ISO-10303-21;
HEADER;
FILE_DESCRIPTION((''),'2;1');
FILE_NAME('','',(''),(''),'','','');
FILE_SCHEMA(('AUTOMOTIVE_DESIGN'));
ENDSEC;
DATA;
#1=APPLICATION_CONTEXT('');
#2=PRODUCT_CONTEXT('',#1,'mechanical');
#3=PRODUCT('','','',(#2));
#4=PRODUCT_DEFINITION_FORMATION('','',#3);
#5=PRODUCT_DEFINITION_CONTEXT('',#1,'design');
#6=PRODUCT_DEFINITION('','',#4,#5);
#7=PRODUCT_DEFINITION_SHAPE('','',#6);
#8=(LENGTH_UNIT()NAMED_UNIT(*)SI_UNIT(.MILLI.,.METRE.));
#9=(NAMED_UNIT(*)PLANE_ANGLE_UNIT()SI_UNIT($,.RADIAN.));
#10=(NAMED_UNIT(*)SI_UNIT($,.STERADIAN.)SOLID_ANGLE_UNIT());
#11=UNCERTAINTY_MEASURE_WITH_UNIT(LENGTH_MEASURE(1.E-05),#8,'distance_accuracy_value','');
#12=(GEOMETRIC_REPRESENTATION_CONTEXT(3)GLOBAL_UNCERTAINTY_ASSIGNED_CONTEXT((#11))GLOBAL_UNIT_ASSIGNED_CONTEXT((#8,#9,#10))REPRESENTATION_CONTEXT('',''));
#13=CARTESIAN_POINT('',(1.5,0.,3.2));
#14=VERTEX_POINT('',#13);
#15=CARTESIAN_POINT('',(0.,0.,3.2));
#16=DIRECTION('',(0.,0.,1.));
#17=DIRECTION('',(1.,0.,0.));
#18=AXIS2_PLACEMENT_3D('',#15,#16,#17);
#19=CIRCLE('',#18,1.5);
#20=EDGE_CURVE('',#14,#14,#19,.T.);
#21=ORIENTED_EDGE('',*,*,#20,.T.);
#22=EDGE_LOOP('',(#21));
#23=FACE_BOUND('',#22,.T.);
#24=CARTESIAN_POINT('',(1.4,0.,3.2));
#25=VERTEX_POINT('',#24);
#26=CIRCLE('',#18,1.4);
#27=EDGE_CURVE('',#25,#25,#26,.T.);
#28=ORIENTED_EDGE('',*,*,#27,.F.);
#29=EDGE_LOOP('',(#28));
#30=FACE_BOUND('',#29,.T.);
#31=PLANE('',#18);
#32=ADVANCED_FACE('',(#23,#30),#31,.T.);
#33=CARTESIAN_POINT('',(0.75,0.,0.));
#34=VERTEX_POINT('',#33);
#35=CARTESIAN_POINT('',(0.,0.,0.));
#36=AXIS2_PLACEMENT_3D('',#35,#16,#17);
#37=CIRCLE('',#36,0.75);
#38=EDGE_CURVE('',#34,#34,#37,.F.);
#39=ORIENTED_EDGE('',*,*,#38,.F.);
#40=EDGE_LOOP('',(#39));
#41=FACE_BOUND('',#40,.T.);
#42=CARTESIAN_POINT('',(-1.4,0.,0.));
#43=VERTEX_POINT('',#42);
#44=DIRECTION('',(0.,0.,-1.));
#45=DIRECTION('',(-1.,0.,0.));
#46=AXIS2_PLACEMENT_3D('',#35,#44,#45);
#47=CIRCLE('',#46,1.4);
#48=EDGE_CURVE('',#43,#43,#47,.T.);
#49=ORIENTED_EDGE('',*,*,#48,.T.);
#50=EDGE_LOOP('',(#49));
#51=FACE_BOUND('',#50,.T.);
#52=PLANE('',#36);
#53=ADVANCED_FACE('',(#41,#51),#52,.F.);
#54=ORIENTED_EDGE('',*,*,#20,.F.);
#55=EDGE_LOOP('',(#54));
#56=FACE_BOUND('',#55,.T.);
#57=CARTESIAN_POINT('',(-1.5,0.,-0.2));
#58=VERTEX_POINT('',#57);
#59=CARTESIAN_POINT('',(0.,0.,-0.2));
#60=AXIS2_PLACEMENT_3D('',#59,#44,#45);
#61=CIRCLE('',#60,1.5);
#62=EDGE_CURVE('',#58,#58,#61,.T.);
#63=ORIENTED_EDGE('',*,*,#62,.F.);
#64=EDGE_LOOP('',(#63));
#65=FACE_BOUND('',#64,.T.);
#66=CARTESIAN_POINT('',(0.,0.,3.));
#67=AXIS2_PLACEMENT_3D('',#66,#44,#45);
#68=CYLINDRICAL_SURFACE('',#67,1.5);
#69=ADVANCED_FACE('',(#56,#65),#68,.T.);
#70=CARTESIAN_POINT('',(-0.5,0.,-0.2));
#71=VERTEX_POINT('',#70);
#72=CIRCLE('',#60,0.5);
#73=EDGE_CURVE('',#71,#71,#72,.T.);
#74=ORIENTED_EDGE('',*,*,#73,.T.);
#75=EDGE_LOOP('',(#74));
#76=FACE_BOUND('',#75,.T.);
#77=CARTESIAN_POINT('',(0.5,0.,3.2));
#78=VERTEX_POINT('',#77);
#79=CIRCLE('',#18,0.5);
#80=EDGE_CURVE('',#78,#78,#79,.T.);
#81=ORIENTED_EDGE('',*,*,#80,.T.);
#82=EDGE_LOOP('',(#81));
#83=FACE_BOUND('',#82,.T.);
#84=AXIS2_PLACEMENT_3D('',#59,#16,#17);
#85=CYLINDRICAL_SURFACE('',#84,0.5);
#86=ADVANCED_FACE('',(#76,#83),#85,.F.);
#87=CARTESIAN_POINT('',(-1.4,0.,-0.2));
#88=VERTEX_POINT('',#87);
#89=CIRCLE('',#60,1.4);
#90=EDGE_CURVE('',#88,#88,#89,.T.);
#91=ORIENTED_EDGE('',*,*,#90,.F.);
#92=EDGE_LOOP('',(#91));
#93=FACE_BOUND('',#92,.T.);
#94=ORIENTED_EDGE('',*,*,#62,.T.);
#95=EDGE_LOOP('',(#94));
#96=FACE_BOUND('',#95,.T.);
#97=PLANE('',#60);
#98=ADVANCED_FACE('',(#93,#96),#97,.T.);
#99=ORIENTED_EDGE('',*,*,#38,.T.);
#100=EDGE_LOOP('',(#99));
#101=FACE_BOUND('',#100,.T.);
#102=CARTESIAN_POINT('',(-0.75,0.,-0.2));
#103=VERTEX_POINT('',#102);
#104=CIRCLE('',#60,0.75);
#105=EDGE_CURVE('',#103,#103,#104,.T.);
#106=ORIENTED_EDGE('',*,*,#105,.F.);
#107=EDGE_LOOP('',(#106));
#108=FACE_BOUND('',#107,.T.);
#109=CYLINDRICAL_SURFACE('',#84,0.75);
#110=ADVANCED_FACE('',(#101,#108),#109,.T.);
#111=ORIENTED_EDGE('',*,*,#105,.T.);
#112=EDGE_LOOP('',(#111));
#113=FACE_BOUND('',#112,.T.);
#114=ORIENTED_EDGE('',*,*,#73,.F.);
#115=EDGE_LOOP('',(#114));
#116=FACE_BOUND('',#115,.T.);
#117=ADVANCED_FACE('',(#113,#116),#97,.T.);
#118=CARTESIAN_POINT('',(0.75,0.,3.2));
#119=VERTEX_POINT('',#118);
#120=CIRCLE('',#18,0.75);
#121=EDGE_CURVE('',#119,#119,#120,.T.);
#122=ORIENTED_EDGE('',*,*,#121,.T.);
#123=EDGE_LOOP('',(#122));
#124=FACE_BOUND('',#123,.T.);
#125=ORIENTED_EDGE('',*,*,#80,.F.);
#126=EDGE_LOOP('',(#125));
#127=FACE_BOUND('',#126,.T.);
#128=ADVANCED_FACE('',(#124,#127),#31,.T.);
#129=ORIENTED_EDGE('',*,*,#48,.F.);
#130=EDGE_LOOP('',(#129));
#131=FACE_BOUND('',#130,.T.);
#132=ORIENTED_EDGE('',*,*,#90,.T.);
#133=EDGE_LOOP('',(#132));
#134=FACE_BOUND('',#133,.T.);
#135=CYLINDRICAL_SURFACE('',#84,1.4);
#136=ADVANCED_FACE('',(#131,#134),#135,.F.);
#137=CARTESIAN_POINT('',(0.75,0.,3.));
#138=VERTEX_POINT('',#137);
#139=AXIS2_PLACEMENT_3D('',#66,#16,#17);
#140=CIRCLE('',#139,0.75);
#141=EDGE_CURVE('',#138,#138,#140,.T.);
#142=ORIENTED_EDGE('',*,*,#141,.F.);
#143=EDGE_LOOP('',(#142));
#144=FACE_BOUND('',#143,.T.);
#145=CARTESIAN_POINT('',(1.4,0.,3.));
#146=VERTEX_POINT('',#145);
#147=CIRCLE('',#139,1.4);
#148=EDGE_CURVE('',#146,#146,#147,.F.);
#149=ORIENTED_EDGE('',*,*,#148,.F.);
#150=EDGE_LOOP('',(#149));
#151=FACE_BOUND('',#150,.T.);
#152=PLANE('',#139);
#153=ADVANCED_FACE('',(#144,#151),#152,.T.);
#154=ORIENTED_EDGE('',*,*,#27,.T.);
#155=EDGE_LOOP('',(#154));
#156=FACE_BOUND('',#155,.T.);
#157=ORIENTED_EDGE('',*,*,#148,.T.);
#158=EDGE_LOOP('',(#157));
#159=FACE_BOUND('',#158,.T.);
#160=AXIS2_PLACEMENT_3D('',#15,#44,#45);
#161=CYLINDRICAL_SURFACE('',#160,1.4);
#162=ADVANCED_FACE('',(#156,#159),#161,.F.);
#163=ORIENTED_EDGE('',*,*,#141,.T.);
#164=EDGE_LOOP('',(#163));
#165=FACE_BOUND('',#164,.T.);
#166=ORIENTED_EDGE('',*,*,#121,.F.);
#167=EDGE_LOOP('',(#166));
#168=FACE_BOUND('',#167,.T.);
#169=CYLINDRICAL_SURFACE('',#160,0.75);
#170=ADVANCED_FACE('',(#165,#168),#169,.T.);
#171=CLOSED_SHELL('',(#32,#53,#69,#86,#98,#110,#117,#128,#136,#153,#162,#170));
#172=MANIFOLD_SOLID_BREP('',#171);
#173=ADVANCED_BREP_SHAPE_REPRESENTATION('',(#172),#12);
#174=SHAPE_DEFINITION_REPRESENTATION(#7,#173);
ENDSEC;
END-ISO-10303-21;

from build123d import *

# Parameters (mm, degrees)
SKETCH_1_R          = 1.5
EXTRUDE_1_DEPTH     = 3
SKETCH_2_R          = 1.5
SKETCH_2_R_2        = 1.4
EXTRUDE_2_DEPTH     = 0.2
EXTRUDE_START       = 0.2
SKETCH_3_R          = 1.5
SKETCH_3_R_2        = 1.4
EXTRUDE_3_DEPTH     = 0.2
SKETCH_4_R          = 0.75
SKETCH_4_R_2        = 0.5
EXTRUDE_4_DEPTH     = 0.2
SKETCH_5_R          = 0.75
SKETCH_5_R_2        = 0.5
EXTRUDE_5_DEPTH     = 0.2
SKETCH_7_R          = 0.5
CUT_EXTRUDE_2_DEPTH = 4.839270764


with BuildPart() as part:
    # 草图1 → 凸台-拉伸1 (new body)
    with BuildSketch(Plane.XY):
        Circle(SKETCH_1_R)
    extrude(amount=EXTRUDE_1_DEPTH)

    # 草图2 → 凸台-拉伸2 (add)
    with BuildSketch(Plane.XY.offset(3)):
        Circle(SKETCH_2_R)
        Circle(SKETCH_2_R_2, mode=Mode.SUBTRACT)
    extrude(amount=EXTRUDE_2_DEPTH)

    # 草图3 → 凸台-拉伸3 (add)
    with BuildSketch(Plane(origin=(0, 0, 0), x_dir=(-1, 0, 0), z_dir=(0, 0, -1)).offset(EXTRUDE_START)):
        Circle(SKETCH_3_R)
        Circle(SKETCH_3_R_2, mode=Mode.SUBTRACT)
    extrude(amount=-EXTRUDE_3_DEPTH)

    # 草图4 → 凸台-拉伸4 (add)
    with BuildSketch(Plane(origin=(0, 0, 0), x_dir=(-1, 0, 0), z_dir=(0, 0, -1))):
        Circle(SKETCH_4_R)
        Circle(SKETCH_4_R_2, mode=Mode.SUBTRACT)
    extrude(amount=EXTRUDE_4_DEPTH)

    # 草图5 → 凸台-拉伸5 (add)
    with BuildSketch(Plane.XY.offset(3).offset(EXTRUDE_START)):
        Circle(SKETCH_5_R)
        Circle(SKETCH_5_R_2, mode=Mode.SUBTRACT)
    extrude(amount=-EXTRUDE_5_DEPTH)

    # 草图7 → 切除-拉伸2 (cut, through all)
    with BuildSketch(Plane(origin=(0, 0, 0), x_dir=(-1, 0, 0), z_dir=(0, 0, -1))):
        Circle(SKETCH_7_R)
    extrude(amount=-CUT_EXTRUDE_2_DEPTH, mode=Mode.SUBTRACT)


solid = part.part
